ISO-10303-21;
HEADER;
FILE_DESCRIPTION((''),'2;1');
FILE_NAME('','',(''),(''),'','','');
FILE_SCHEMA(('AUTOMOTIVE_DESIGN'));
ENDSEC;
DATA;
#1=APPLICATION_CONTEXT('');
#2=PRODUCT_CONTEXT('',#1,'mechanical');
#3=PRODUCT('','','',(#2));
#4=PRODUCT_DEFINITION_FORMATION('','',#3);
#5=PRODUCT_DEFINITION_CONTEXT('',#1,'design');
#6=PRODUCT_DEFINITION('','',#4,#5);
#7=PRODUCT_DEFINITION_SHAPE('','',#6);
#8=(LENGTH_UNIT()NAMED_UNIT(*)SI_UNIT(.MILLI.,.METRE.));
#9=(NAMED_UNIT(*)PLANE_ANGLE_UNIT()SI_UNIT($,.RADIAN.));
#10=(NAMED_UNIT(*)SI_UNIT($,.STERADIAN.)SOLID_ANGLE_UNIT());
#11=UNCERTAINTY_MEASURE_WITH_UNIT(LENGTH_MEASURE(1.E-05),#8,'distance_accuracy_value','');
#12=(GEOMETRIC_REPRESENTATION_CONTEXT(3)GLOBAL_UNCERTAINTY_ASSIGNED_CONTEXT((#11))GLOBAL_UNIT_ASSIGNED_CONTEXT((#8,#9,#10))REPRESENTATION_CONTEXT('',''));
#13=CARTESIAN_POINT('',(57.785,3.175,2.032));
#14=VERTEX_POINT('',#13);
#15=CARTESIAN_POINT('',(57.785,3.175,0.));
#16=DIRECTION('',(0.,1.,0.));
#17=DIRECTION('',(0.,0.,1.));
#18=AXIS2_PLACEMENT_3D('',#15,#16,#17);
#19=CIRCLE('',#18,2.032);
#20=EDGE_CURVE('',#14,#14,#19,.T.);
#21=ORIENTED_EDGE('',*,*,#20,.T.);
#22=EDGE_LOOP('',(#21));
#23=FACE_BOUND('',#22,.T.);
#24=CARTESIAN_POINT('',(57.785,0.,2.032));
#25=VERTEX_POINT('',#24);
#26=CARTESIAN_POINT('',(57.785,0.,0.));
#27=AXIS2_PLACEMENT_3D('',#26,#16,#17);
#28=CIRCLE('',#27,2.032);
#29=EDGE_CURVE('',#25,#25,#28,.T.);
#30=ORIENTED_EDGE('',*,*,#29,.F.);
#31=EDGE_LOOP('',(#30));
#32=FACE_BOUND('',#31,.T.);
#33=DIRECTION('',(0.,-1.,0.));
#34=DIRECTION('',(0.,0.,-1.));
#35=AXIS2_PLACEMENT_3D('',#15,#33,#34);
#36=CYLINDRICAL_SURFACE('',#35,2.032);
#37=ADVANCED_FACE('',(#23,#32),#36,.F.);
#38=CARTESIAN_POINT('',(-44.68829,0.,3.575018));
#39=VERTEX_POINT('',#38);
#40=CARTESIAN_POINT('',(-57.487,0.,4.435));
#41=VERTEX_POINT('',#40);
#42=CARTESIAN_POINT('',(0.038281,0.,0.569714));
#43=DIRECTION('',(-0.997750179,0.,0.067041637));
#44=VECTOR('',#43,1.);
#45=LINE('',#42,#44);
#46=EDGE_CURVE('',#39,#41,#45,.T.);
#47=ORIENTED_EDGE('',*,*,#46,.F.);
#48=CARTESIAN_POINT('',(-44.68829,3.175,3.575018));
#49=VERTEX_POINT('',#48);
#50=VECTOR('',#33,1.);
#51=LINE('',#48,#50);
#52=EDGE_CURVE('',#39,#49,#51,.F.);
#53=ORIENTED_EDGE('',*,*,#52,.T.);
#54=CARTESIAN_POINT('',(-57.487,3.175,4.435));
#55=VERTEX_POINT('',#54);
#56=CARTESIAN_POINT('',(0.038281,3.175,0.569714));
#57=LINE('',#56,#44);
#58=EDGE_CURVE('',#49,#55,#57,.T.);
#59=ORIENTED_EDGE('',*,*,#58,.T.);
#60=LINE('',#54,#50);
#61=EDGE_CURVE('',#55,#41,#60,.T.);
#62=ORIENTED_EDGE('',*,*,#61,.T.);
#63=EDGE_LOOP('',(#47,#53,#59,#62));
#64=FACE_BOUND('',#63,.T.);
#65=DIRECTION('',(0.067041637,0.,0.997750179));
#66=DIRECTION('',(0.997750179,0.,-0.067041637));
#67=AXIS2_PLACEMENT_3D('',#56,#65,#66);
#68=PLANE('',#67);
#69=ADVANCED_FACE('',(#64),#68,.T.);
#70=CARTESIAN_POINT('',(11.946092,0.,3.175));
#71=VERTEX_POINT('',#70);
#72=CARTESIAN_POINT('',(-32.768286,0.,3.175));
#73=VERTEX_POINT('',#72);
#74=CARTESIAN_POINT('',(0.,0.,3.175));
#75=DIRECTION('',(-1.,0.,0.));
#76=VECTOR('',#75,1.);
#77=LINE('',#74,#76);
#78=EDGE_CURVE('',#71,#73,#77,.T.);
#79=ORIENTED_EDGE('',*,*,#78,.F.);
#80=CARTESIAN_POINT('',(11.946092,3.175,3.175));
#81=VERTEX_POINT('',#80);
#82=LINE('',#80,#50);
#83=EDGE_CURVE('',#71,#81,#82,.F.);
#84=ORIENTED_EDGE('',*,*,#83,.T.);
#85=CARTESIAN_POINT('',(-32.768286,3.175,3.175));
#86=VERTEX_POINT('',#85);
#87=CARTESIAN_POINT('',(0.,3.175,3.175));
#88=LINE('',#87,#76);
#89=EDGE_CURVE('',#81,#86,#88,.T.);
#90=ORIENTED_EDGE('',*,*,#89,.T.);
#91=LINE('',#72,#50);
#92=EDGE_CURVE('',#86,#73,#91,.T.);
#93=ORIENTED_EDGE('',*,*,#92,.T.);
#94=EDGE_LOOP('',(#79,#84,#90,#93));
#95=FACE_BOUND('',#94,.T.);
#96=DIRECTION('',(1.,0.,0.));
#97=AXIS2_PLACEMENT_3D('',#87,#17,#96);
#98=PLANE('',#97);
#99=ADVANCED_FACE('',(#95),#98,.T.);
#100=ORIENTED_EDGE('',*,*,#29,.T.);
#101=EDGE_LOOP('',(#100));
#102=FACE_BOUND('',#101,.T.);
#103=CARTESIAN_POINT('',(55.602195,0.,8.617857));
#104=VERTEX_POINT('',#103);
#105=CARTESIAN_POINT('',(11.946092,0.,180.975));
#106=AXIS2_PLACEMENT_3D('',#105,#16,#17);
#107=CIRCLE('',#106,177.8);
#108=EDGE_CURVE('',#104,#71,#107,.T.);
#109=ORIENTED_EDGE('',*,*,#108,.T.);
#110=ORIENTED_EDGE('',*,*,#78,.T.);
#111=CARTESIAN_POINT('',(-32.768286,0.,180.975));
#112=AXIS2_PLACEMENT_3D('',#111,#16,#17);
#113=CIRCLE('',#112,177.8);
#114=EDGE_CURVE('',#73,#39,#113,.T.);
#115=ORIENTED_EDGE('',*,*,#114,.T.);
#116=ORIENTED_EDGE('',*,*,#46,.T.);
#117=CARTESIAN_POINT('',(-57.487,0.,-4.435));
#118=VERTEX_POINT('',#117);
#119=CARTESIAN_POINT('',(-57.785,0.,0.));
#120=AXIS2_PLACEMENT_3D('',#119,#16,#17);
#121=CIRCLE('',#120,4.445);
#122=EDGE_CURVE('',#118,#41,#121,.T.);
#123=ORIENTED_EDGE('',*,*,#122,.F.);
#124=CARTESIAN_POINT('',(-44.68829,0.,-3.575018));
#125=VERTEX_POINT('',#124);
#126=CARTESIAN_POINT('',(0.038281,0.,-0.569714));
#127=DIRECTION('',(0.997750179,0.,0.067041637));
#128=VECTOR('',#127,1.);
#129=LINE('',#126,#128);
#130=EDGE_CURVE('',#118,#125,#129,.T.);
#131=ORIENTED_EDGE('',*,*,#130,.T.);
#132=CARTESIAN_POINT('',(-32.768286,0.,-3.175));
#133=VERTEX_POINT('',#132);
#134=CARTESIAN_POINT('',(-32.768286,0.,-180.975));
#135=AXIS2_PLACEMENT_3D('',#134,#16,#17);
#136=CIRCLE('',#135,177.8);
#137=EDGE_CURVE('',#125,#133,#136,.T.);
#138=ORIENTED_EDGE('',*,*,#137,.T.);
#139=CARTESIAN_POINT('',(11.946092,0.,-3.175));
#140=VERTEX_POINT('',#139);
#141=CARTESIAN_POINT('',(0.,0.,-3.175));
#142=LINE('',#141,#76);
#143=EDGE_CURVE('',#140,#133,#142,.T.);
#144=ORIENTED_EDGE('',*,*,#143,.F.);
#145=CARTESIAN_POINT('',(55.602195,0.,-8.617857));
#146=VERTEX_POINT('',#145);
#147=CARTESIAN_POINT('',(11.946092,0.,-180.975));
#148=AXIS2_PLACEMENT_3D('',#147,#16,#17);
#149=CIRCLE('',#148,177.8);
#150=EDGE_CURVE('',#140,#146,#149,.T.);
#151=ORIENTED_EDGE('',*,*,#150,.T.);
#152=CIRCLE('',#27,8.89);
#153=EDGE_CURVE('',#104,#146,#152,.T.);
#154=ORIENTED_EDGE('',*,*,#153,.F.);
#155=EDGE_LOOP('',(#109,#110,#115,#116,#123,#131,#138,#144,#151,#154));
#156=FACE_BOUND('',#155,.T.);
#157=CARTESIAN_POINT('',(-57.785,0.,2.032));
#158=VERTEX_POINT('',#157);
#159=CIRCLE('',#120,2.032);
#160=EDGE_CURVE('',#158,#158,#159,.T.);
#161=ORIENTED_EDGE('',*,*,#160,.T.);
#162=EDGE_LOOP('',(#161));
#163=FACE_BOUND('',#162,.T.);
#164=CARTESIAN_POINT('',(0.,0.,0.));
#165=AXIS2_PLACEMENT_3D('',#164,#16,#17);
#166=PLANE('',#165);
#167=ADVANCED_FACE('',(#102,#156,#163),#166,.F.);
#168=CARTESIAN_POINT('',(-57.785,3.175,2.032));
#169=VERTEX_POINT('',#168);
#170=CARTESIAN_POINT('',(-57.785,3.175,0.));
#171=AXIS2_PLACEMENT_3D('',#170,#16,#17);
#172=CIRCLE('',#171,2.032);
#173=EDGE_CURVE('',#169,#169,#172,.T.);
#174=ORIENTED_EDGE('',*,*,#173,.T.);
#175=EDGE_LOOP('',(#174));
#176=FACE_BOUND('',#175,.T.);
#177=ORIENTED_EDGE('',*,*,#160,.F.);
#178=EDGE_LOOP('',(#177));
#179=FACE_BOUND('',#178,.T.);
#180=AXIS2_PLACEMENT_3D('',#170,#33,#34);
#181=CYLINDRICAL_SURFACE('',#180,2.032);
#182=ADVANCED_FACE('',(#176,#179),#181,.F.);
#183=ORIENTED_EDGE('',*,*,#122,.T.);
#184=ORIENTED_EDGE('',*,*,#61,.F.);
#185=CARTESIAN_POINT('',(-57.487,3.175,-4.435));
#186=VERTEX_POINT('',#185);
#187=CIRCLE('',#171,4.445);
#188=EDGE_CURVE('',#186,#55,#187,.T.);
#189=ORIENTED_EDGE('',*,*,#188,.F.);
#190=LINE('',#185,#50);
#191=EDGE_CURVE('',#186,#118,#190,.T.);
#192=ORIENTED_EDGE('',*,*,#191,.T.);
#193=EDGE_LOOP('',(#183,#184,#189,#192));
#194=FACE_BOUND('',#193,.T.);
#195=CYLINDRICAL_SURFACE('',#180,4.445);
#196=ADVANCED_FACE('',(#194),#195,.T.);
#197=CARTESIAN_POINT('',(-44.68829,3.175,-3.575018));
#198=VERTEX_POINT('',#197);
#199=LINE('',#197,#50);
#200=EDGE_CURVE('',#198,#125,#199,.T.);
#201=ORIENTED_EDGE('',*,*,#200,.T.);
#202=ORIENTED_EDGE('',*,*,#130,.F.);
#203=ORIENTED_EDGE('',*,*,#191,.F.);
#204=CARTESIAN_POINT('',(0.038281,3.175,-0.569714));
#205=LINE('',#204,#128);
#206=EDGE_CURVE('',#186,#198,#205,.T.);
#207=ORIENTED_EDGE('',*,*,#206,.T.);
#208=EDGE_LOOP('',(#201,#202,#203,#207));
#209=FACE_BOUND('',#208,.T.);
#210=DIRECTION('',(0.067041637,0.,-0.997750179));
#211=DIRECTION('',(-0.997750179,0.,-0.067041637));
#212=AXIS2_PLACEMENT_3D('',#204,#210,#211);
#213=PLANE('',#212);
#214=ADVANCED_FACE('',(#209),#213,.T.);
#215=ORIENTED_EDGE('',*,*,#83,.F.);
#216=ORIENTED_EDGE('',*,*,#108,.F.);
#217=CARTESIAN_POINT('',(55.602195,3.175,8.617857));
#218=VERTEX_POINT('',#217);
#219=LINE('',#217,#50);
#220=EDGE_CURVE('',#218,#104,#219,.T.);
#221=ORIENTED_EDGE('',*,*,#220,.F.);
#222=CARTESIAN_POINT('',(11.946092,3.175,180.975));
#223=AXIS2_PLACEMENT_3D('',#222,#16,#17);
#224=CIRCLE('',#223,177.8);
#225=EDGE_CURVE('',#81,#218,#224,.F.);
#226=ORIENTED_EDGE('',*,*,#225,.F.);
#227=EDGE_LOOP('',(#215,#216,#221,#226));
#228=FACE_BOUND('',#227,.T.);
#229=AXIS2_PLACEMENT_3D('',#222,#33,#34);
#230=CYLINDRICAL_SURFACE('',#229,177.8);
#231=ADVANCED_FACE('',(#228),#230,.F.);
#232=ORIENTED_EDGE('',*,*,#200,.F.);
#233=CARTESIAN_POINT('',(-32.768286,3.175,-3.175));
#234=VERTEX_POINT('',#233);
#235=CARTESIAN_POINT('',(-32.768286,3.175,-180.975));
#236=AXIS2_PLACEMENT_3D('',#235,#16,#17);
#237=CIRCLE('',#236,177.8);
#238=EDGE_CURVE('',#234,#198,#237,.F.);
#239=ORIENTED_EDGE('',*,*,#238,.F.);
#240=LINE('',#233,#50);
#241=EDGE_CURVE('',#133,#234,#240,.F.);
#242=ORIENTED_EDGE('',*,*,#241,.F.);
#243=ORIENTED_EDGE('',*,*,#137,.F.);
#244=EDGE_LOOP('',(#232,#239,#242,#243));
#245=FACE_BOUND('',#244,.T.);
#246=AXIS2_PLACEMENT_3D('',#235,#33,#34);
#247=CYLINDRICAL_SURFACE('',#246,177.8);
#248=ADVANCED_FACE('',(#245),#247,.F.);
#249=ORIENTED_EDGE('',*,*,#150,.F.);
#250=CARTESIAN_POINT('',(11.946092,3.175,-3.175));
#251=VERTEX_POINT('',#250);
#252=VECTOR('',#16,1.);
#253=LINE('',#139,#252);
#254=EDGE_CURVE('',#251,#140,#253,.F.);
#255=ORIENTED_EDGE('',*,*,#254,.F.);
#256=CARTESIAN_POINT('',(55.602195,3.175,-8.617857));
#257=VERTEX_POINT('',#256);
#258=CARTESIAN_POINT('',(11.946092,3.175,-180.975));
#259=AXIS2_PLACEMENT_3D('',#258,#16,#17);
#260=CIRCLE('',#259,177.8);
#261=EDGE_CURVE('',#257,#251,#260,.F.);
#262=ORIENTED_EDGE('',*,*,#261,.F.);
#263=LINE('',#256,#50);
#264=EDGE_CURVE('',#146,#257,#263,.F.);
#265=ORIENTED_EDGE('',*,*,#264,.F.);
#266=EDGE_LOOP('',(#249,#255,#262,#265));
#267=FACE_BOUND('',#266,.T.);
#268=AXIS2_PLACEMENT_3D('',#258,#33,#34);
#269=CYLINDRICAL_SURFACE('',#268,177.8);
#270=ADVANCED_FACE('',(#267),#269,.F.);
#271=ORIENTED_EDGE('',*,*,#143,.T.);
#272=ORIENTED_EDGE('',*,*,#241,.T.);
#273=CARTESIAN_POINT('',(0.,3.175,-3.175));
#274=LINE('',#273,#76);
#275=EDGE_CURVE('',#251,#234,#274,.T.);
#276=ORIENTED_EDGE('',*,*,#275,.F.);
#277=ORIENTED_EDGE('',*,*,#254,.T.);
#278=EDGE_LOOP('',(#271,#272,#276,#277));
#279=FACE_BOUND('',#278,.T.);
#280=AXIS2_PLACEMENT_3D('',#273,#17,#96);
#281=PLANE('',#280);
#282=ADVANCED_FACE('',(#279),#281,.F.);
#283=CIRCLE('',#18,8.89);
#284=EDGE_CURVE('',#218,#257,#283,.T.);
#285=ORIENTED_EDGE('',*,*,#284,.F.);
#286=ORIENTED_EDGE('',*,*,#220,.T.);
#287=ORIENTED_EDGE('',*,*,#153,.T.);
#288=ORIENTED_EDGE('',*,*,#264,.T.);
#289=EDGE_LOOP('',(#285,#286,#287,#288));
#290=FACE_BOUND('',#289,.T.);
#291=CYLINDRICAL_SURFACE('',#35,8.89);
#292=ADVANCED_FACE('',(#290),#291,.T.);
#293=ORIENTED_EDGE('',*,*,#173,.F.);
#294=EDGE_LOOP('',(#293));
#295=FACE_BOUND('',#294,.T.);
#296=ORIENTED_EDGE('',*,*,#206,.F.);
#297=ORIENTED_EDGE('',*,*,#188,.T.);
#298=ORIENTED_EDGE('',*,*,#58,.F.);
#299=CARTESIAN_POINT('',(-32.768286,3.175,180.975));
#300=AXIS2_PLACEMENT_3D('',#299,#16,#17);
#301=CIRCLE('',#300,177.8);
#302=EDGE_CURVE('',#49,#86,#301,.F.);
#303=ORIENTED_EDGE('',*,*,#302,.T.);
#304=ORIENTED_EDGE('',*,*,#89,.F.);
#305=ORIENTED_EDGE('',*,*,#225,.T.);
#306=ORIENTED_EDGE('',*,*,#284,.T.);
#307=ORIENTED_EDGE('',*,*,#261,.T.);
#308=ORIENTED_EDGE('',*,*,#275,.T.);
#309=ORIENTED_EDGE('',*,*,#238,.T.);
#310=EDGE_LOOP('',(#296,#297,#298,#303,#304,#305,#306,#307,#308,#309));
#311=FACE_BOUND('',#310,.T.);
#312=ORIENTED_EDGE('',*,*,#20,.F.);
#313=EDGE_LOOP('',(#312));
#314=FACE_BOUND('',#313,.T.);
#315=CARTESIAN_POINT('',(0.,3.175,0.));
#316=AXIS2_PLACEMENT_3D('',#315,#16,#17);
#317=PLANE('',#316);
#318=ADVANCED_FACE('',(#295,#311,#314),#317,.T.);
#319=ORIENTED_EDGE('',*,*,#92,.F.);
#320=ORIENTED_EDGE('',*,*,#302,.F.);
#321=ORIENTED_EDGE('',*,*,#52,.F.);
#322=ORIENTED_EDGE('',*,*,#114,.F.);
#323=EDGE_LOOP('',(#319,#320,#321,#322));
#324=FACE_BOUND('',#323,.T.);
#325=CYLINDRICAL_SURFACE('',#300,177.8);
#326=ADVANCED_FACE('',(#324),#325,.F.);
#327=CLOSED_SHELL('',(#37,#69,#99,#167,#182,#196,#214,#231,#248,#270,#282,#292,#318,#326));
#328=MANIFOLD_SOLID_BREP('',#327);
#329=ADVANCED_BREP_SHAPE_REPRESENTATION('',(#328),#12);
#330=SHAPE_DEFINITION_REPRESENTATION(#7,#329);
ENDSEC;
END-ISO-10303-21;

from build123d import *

# Parameters (mm, degrees)
SKETCH1_R           = 2.032
BOSS_EXTRUDE1_DEPTH = 3.175
FILLET2_DEPTH       = 3.175


with BuildPart() as part:
    # Sketch1 → Boss-Extrude1 (new body)
    with BuildSketch(Plane(origin=(0, 0, 0), x_dir=(1, 0, 0), z_dir=(0, 1, 0))):
        with BuildLine():
            Line((-38.735, -3.175), (38.735, -3.175))
            Line((38.735, -3.175), (55.045918919, -8.457513514))
            ThreePointArc((55.045918919, -8.457513514), (66.675, 0), (55.045918919, 8.457513514))
            Line((55.045918919, 8.457513514), (38.735, 3.175))
            Line((38.735, 3.175), (-38.735, 3.175))
            Line((-38.735, 3.175), (-57.486999924, 4.434999544))
            ThreePointArc((-57.486999924, 4.434999544), (-62.23, 0), (-57.486999924, -4.434999544))
            Line((-57.486999924, -4.434999544), (-38.735, -3.175))
        make_face()
        with Locations(Location((-57.785, 0, 0), (0, 0, 270))):
            Circle(SKETCH1_R, mode=Mode.SUBTRACT)
        with Locations(Location((57.785, 0, 0), (0, 0, 270))):
            Circle(SKETCH1_R, mode=Mode.SUBTRACT)
    extrude(amount=BOSS_EXTRUDE1_DEPTH)

    # Fillet2: read off the stored shape, not the designer's step
    # Fillet2 outline → Fillet2 (add)
    with BuildSketch(Plane(origin=(0, 0, 0), x_dir=(1, 0, 0), z_dir=(0, 1, 0))):
        with BuildLine():
            ThreePointArc((55.045918919, 8.457513514), (55.322751331, 8.542214672), (55.602194863, 8.617857143))
            ThreePointArc((55.602194863, 8.617857143), (33.943137383, 4.540961334), (11.946092127, 3.175))
            Line((11.946092127, 3.175), (38.735, 3.175))
            Line((38.735, 3.175), (55.045918919, 8.457513514))
        make_face()
        with BuildLine():
            ThreePointArc((-44.6882895, -3.575018243), (-38.731643046, -3.275032701), (-32.76828646, -3.175))
            Line((-32.76828646, -3.175), (-38.735, -3.175))
            Line((-38.735, -3.175), (-44.6882895, -3.575018243))
        make_face()
        with BuildLine():
            ThreePointArc((11.946092127, -3.175), (33.943137383, -4.540961334), (55.602194863, -8.617857143))
            ThreePointArc((55.602194863, -8.617857143), (55.322751331, -8.542214672), (55.045918919, -8.457513514))
            Line((55.045918919, -8.457513514), (38.735, -3.175))
            Line((38.735, -3.175), (11.946092127, -3.175))
        make_face()
        with BuildLine():
            Line((-38.735, 3.175), (-32.76828646, 3.175))
            ThreePointArc((-32.76828646, 3.175), (-38.731643046, 3.275032701), (-44.6882895, 3.575018243))
            Line((-44.6882895, 3.575018243), (-38.735, 3.175))
        make_face()
    extrude(amount=FILLET2_DEPTH)


solid = part.part
